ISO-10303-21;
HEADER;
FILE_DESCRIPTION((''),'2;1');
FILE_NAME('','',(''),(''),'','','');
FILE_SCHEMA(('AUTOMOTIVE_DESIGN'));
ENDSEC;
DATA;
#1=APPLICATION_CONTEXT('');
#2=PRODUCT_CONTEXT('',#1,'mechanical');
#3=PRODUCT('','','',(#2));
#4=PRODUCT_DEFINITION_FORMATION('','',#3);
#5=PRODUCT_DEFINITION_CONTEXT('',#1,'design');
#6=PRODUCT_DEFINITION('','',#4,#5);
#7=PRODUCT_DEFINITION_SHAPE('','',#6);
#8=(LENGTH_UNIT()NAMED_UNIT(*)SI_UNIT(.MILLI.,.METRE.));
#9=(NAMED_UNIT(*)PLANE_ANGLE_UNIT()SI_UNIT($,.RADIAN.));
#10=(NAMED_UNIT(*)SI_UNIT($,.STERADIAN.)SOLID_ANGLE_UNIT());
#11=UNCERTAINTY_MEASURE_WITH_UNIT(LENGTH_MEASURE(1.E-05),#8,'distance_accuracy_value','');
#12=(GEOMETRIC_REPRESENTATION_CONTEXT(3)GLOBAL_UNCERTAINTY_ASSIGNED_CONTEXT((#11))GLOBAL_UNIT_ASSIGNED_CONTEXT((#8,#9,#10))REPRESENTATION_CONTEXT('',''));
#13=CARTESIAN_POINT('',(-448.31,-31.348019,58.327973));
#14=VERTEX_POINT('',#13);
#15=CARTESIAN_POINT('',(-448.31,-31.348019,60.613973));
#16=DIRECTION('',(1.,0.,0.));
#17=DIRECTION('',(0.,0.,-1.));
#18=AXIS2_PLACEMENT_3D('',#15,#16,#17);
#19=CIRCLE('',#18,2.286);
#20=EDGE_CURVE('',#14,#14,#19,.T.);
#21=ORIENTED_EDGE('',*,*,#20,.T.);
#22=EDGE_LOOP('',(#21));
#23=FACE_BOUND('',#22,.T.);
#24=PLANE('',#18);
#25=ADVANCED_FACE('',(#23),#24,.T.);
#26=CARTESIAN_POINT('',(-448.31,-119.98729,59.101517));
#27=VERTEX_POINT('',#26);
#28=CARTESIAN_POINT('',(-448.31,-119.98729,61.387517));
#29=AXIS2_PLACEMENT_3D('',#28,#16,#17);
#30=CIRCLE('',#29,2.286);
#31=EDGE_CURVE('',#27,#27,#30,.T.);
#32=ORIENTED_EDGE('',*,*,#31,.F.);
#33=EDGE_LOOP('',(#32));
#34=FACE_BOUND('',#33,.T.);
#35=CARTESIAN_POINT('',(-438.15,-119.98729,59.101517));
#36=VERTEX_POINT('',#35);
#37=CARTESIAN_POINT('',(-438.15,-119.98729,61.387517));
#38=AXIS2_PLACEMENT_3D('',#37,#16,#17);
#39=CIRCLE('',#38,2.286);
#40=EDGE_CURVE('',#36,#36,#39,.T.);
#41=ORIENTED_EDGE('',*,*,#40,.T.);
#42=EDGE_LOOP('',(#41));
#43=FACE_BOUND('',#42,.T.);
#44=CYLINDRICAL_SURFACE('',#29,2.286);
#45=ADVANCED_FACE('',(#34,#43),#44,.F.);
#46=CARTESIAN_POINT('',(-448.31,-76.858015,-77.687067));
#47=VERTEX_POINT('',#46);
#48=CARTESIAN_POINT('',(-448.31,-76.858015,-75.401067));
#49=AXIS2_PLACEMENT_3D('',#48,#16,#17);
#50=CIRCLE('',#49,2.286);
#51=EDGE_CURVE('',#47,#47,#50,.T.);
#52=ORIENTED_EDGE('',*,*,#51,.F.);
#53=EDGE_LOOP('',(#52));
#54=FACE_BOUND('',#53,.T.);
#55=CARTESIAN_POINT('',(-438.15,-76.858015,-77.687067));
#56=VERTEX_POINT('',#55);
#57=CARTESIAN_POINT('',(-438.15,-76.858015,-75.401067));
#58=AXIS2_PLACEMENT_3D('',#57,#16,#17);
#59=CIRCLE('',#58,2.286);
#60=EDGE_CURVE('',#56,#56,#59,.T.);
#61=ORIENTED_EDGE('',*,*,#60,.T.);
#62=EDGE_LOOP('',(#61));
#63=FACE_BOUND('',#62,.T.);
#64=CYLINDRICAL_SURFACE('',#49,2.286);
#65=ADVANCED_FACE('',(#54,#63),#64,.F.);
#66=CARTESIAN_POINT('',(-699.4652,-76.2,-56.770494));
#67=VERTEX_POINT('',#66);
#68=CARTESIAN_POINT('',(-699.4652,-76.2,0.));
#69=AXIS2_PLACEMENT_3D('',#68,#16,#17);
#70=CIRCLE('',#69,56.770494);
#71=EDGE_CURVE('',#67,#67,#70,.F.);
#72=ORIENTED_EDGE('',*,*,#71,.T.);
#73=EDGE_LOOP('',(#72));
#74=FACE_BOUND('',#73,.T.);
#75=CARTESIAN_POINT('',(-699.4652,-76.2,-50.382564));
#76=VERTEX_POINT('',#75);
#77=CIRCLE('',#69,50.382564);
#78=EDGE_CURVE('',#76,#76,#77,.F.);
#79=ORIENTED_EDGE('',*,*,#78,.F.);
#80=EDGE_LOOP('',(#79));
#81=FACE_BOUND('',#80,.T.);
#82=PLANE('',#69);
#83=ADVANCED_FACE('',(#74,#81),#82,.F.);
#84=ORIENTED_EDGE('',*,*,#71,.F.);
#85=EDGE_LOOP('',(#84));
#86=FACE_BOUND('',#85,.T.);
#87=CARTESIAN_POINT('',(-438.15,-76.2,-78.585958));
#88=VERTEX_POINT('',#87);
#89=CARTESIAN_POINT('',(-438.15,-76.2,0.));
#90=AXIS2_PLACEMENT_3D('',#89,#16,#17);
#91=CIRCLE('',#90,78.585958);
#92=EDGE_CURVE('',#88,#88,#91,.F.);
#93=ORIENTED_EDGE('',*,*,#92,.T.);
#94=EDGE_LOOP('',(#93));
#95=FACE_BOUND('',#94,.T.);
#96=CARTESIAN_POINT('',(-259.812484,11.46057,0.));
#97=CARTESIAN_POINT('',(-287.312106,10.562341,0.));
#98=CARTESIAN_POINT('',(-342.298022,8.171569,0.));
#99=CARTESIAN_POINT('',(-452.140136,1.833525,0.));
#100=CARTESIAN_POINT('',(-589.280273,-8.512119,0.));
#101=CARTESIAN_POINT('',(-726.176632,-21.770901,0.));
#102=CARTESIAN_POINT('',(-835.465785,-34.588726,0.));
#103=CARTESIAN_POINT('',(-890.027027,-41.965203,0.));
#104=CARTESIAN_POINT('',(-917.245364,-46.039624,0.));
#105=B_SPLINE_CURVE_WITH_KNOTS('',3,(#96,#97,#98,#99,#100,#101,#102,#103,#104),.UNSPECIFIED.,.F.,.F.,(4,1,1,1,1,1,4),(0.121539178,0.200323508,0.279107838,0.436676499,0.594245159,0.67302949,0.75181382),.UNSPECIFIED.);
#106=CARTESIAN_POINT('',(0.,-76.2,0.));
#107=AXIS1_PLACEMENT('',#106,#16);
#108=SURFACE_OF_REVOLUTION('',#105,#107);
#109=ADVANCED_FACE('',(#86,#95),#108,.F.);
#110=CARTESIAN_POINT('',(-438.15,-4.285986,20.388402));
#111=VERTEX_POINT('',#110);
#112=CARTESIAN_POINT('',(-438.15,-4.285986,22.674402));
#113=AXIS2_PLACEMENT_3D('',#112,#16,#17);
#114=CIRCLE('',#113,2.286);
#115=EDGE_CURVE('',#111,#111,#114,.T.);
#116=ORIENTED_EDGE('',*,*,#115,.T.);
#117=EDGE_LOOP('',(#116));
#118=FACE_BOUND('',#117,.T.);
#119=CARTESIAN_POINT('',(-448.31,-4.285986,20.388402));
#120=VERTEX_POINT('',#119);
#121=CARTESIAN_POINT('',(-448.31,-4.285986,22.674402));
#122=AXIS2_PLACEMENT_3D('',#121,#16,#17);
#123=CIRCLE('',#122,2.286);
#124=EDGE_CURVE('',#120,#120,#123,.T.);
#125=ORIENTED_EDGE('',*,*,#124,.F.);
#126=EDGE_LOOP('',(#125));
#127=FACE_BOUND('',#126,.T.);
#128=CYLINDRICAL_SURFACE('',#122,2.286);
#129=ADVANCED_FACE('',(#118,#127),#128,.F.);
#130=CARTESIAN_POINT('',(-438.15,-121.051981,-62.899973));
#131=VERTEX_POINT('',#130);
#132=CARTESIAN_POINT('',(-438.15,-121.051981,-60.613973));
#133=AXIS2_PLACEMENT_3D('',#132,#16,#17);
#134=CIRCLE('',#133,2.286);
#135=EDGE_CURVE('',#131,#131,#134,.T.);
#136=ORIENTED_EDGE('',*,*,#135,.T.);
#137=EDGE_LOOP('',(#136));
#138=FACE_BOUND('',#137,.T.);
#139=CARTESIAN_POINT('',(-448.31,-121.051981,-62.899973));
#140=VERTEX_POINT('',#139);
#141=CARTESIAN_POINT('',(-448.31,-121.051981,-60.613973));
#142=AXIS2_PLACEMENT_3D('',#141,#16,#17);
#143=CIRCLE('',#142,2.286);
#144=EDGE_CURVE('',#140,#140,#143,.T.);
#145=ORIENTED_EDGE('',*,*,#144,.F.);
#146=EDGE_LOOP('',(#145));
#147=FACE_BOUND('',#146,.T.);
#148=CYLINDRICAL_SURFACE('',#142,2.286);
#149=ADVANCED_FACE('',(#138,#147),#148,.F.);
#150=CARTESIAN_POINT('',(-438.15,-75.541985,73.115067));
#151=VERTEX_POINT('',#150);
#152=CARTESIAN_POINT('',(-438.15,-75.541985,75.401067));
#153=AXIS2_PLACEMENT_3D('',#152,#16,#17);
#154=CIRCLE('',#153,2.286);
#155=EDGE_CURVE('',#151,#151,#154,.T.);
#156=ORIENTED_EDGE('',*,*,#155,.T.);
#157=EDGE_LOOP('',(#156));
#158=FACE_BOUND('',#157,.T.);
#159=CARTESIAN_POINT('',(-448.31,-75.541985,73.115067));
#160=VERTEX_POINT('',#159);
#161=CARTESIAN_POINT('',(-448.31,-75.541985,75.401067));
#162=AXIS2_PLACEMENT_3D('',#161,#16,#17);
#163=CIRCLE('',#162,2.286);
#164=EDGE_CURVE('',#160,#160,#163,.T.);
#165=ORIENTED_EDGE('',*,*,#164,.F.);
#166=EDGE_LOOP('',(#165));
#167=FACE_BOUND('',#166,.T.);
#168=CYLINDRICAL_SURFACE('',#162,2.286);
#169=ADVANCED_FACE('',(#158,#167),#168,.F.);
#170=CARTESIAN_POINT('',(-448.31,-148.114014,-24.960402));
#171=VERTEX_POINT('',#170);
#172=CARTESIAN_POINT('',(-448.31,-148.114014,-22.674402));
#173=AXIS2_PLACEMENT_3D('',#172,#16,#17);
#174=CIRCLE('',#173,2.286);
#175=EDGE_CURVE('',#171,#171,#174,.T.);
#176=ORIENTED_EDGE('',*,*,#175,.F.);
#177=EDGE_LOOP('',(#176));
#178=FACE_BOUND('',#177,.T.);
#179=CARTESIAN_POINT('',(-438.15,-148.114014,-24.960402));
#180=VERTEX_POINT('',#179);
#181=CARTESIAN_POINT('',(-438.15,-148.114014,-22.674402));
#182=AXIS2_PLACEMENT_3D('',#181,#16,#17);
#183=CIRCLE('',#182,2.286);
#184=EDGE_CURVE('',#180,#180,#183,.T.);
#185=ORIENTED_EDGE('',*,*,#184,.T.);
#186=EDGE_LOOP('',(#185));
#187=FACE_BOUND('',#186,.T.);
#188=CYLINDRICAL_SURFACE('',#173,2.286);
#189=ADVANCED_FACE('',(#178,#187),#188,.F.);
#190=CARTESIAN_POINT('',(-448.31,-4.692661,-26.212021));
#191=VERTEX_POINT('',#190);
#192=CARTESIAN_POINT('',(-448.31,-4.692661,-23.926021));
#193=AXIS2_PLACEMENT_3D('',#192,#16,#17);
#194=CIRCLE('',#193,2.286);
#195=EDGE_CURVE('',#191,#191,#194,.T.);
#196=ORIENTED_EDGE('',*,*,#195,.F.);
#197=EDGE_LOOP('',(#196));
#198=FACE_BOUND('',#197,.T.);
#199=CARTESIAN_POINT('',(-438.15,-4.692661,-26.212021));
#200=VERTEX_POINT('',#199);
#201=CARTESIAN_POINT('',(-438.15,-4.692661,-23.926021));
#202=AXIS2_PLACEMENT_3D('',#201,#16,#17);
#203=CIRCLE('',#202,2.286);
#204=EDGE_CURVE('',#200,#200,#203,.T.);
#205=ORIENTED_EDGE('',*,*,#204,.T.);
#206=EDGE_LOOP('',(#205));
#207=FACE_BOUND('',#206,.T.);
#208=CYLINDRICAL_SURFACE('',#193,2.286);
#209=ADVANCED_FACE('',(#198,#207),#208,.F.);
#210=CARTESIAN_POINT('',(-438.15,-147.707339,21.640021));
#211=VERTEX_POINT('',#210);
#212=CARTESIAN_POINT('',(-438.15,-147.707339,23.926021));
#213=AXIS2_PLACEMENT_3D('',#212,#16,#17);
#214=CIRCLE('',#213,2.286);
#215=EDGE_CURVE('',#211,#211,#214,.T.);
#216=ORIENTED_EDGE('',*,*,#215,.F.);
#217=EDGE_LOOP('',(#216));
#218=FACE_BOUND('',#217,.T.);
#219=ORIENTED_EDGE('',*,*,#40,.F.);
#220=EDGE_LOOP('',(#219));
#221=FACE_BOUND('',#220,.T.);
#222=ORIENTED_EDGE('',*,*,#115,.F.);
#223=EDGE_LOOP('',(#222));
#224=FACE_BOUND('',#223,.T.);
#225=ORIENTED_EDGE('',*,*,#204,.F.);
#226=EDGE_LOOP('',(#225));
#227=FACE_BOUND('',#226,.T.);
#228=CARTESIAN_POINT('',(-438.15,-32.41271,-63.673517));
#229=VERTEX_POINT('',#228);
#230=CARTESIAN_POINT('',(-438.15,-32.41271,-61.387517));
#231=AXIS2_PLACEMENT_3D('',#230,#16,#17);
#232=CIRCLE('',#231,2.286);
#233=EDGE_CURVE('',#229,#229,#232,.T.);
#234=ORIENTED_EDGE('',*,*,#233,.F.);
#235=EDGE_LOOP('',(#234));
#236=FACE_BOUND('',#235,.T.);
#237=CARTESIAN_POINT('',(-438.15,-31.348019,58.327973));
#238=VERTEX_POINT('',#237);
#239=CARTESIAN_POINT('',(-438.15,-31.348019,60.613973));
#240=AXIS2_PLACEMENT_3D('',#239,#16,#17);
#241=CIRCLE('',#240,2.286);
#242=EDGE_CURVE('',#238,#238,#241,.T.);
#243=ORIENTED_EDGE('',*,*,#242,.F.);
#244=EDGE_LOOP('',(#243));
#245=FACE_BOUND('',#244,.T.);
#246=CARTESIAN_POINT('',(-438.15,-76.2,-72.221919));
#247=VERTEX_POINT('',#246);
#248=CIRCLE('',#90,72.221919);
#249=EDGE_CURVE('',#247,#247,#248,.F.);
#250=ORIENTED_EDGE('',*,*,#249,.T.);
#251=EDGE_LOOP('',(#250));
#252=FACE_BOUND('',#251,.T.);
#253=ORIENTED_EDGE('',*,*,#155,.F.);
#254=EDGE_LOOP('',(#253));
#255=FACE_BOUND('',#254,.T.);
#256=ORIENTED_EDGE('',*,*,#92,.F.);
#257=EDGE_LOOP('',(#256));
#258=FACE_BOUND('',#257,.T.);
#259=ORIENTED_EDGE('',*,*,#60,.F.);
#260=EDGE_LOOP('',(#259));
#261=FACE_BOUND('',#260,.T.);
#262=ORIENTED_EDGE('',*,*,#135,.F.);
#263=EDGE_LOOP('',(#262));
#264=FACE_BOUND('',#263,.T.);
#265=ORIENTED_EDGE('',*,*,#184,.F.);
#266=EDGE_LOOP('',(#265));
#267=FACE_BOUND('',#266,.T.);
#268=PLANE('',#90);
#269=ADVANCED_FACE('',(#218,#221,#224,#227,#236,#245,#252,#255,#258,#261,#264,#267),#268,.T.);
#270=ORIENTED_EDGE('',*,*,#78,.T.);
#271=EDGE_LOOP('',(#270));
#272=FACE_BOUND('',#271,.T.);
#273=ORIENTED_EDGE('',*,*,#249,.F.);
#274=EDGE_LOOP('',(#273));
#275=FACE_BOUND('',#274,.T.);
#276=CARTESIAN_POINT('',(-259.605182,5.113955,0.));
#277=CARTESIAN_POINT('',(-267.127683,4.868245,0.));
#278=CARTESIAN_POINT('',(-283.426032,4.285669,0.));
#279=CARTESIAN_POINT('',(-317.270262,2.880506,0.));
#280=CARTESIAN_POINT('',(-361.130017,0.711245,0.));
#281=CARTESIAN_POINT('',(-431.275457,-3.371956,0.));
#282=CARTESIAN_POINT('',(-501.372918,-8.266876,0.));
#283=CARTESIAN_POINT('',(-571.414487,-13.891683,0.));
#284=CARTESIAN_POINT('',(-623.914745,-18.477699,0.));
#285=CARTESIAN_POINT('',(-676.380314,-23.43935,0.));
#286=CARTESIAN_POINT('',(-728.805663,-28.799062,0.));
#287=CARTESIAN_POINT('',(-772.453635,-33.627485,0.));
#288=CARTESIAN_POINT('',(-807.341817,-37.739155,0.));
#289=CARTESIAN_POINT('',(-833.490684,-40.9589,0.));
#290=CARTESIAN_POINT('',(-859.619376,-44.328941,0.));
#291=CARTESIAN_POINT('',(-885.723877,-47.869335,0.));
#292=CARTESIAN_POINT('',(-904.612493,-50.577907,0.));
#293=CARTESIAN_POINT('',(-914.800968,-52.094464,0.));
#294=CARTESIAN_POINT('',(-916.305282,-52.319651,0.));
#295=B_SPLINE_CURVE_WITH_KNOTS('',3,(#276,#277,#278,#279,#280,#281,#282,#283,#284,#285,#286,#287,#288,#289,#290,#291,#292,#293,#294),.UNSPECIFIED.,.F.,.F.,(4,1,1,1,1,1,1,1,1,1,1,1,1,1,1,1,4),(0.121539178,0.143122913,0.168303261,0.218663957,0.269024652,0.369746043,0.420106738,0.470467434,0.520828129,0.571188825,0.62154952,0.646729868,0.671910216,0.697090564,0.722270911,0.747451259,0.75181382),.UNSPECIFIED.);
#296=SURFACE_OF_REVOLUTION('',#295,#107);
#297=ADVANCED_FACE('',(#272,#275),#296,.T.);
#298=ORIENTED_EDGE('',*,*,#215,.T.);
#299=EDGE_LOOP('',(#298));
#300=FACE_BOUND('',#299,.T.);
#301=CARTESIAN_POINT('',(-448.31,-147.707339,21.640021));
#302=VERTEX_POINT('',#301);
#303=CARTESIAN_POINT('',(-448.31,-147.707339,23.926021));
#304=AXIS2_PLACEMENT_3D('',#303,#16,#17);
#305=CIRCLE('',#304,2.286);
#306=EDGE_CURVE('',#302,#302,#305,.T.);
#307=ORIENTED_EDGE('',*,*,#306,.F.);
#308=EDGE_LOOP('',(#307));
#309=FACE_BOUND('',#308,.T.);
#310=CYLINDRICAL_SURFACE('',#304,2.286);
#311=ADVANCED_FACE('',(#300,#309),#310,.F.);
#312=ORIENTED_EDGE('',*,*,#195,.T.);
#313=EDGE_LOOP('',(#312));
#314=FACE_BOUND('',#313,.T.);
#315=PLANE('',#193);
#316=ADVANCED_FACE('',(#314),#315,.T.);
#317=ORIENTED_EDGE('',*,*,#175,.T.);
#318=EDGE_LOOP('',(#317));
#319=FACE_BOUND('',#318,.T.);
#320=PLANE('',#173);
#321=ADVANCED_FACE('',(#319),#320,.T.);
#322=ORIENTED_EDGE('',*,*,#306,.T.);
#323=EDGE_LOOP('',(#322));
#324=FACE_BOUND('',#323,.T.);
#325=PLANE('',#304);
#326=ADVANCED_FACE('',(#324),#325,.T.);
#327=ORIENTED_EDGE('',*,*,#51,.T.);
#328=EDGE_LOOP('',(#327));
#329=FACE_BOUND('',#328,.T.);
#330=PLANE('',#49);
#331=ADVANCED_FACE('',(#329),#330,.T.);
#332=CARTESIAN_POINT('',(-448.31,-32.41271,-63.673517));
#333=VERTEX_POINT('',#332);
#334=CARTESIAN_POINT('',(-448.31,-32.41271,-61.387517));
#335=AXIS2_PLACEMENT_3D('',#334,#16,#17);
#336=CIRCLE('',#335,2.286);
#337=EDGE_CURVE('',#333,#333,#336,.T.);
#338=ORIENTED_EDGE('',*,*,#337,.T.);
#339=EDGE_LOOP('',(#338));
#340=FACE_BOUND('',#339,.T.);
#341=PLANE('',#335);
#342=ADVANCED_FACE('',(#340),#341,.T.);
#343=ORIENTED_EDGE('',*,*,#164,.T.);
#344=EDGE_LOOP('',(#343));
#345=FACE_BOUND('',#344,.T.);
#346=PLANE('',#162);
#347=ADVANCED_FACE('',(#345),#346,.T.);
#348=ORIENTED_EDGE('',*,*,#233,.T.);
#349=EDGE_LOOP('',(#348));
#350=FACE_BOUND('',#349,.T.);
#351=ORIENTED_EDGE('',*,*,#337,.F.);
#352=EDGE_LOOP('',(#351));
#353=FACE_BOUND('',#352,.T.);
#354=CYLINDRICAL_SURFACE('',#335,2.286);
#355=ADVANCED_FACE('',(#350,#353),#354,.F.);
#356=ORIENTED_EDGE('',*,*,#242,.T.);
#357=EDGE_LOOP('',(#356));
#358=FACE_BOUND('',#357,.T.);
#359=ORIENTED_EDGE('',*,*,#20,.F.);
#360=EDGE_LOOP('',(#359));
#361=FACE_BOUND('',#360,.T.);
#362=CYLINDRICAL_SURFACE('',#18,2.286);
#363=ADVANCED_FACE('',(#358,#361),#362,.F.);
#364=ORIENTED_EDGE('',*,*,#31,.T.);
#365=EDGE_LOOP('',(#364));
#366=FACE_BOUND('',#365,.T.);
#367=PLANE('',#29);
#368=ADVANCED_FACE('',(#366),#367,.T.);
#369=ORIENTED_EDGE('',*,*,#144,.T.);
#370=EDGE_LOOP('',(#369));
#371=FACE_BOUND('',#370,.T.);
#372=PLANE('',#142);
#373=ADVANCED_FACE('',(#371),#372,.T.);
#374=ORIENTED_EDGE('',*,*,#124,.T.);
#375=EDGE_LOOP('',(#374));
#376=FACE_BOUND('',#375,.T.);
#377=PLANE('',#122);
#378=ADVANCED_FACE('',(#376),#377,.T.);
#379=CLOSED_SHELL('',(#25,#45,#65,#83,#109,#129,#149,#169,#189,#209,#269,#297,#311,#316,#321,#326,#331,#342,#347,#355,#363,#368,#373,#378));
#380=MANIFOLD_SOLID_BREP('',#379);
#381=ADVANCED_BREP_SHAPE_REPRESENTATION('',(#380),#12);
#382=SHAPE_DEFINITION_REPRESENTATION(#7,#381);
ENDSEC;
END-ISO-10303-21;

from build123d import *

# Parameters (mm, degrees)
SKETCH8_R          = 142.345864783
CUT_EXTRUDE4_DEPTH = 524.976683945
SKETCH9_R          = 2.286
CUT_EXTRUDE5_DEPTH = 10.16
SKETCH10_R         = 97.880426188
CUT_EXTRUDE6_DEPTH = 228.6


with BuildPart() as part:
    # Sketch1 → Revolve1 (revolve)
    with BuildSketch(Plane.XY):
        with BuildLine():
            Line((6.35, 11.460570284), (-259.812483715, 11.460570284))
            add(Edge.make_bspline(
                [(-259.812483715, 11.460570284), (-287.31210638, 10.562340852), (-342.298022137, 8.171569009), (-452.140135716, 1.833524736), (-589.280273052, -8.512118808), (-726.176632388, -21.770900754), (-835.465785428, -34.58872614), (-890.027026607, -41.965202762), (-917.245364413, -46.039623622)],
                knots=[0.121539178, 0.121539178, 0.121539178, 0.121539178, 0.200323508, 0.279107838, 0.436676499, 0.594245159, 0.67302949, 0.75181382, 0.75181382, 0.75181382, 0.75181382], degree=3))
            ThreePointArc((-917.245364413, -46.039623622), (-924.987260279, -50.310773033), (-928.0652, -58.599678629))
            Line((-928.0652, -58.599678629), (-921.7152, -58.599678629))
            ThreePointArc((-921.7152, -58.599678629), (-920.17623014, -54.455225831), (-916.305282206, -52.319651125))
            add(Edge.make_bspline(
                [(-259.605182082, 5.113954963), (-267.127682546, 4.868244998), (-283.42603151, 4.285669281), (-317.270262329, 2.880505646), (-361.130016616, 0.711244662), (-431.275457269, -3.371956494), (-501.372917975, -8.266876273), (-571.414486843, -13.891682648), (-623.914744737, -18.477698889), (-676.380314027, -23.439349795), (-728.80566324, -28.799062072), (-772.453634614, -33.627485173), (-807.34181653, -37.739154543), (-833.490683911, -40.958900147), (-859.619375692, -44.328941115), (-885.723877265, -47.869335132), (-904.612492975, -50.577906922), (-914.800968172, -52.094464395), (-916.305282206, -52.319651125)],
                knots=[0.121539178, 0.121539178, 0.121539178, 0.121539178, 0.143122913, 0.168303261, 0.218663957, 0.269024652, 0.369746043, 0.420106738, 0.470467434, 0.520828129, 0.571188825, 0.62154952, 0.646729868, 0.671910216, 0.697090564, 0.722270911, 0.747451259, 0.75181382, 0.75181382, 0.75181382, 0.75181382], degree=3))
            ThreePointArc((-259.605182082, 5.113954963), (-256.399753184, 4.364993874), (-254, 2.11179575))
            ThreePointArc((-254, 2.11179575), (-251.60858665, -0.136927523), (-248.413737762, -0.890953221))
            add(Edge.make_bspline(
                [(0, 0), (-50.8, 0), (-101.6, 0), (-157.182375328, 0), (-166.747125983, 0), (-181.094251966, 0), (-190.659002621, 0), (-199.585120865, 0), (-207.872606698, 0), (-220.304800851, -0.154959839), (-228.589711976, -0.361524821), (-235.094659099, -0.523710542), (-239.819642219, -0.641517002), (-245.046645359, -0.791480258), (-247.911294959, -0.876040976), (-248.413737762, -0.890953221)],
                knots=[0.761574077, 0.761574077, 0.761574077, 0.761574077, 0.907841521, 0.907841521, 0.921611321, 0.935381121, 0.94915092, 0.94915092, 0.961081918, 0.973012916, 0.984943914, 0.984943914, 0.991748303, 0.998552693, 1, 1, 1, 1], degree=3))
            Line((0, 0), (6.35, 0))
            Line((6.35, 0), (6.35, 11.460570284))
        make_face()
    revolve(axis=Axis((0, -76.2, 0), (-1, 0, 0)))

    # Sketch8 → Cut-Extrude4 (cut, through all)
    with BuildSketch(Plane(origin=(-438.15, 0, 0), x_dir=(0, 0, -1), z_dir=(1, 0, 0))):
        with Locations((0, -76.2)):
            Circle(SKETCH8_R)
    extrude(amount=CUT_EXTRUDE4_DEPTH, mode=Mode.SUBTRACT)

    # Sketch9 → Cut-Extrude5 (cut)
    with BuildSketch(Plane(origin=(-438.15, 0, 0), x_dir=(0, 0, -1), z_dir=(1, 0, 0))):
        with Locations((23.926020811, -4.692661383)):
            Circle(SKETCH9_R)
        with Locations((61.387516514, -32.412710015)):
            Circle(SKETCH9_R)
        with Locations((75.401067393, -76.858015146)):
            Circle(SKETCH9_R)
        with Locations((60.613973316, -121.051980857)):
            Circle(SKETCH9_R)
        with Locations((22.674401626, -148.114014343)):
            Circle(SKETCH9_R)
        with Locations((-23.926020811, -147.707338617)):
            Circle(SKETCH9_R)
        with Locations((-61.387516514, -119.987289985)):
            Circle(SKETCH9_R)
        with Locations((-75.401067393, -75.541984854)):
            Circle(SKETCH9_R)
        with Locations((-60.613973316, -31.348019143)):
            Circle(SKETCH9_R)
        with Locations((-22.674401626, -4.285985657)):
            Circle(SKETCH9_R)
    extrude(amount=-CUT_EXTRUDE5_DEPTH, mode=Mode.SUBTRACT)

    # Sketch10 → Cut-Extrude6 (cut)
    with BuildSketch(Plane(origin=(-928.0652, 0, 0), x_dir=(0, 0, -1), z_dir=(1, 0, 0))):
        with Locations((0, -76.2)):
            Circle(SKETCH10_R)
    extrude(amount=CUT_EXTRUDE6_DEPTH, mode=Mode.SUBTRACT)


solid = part.part
